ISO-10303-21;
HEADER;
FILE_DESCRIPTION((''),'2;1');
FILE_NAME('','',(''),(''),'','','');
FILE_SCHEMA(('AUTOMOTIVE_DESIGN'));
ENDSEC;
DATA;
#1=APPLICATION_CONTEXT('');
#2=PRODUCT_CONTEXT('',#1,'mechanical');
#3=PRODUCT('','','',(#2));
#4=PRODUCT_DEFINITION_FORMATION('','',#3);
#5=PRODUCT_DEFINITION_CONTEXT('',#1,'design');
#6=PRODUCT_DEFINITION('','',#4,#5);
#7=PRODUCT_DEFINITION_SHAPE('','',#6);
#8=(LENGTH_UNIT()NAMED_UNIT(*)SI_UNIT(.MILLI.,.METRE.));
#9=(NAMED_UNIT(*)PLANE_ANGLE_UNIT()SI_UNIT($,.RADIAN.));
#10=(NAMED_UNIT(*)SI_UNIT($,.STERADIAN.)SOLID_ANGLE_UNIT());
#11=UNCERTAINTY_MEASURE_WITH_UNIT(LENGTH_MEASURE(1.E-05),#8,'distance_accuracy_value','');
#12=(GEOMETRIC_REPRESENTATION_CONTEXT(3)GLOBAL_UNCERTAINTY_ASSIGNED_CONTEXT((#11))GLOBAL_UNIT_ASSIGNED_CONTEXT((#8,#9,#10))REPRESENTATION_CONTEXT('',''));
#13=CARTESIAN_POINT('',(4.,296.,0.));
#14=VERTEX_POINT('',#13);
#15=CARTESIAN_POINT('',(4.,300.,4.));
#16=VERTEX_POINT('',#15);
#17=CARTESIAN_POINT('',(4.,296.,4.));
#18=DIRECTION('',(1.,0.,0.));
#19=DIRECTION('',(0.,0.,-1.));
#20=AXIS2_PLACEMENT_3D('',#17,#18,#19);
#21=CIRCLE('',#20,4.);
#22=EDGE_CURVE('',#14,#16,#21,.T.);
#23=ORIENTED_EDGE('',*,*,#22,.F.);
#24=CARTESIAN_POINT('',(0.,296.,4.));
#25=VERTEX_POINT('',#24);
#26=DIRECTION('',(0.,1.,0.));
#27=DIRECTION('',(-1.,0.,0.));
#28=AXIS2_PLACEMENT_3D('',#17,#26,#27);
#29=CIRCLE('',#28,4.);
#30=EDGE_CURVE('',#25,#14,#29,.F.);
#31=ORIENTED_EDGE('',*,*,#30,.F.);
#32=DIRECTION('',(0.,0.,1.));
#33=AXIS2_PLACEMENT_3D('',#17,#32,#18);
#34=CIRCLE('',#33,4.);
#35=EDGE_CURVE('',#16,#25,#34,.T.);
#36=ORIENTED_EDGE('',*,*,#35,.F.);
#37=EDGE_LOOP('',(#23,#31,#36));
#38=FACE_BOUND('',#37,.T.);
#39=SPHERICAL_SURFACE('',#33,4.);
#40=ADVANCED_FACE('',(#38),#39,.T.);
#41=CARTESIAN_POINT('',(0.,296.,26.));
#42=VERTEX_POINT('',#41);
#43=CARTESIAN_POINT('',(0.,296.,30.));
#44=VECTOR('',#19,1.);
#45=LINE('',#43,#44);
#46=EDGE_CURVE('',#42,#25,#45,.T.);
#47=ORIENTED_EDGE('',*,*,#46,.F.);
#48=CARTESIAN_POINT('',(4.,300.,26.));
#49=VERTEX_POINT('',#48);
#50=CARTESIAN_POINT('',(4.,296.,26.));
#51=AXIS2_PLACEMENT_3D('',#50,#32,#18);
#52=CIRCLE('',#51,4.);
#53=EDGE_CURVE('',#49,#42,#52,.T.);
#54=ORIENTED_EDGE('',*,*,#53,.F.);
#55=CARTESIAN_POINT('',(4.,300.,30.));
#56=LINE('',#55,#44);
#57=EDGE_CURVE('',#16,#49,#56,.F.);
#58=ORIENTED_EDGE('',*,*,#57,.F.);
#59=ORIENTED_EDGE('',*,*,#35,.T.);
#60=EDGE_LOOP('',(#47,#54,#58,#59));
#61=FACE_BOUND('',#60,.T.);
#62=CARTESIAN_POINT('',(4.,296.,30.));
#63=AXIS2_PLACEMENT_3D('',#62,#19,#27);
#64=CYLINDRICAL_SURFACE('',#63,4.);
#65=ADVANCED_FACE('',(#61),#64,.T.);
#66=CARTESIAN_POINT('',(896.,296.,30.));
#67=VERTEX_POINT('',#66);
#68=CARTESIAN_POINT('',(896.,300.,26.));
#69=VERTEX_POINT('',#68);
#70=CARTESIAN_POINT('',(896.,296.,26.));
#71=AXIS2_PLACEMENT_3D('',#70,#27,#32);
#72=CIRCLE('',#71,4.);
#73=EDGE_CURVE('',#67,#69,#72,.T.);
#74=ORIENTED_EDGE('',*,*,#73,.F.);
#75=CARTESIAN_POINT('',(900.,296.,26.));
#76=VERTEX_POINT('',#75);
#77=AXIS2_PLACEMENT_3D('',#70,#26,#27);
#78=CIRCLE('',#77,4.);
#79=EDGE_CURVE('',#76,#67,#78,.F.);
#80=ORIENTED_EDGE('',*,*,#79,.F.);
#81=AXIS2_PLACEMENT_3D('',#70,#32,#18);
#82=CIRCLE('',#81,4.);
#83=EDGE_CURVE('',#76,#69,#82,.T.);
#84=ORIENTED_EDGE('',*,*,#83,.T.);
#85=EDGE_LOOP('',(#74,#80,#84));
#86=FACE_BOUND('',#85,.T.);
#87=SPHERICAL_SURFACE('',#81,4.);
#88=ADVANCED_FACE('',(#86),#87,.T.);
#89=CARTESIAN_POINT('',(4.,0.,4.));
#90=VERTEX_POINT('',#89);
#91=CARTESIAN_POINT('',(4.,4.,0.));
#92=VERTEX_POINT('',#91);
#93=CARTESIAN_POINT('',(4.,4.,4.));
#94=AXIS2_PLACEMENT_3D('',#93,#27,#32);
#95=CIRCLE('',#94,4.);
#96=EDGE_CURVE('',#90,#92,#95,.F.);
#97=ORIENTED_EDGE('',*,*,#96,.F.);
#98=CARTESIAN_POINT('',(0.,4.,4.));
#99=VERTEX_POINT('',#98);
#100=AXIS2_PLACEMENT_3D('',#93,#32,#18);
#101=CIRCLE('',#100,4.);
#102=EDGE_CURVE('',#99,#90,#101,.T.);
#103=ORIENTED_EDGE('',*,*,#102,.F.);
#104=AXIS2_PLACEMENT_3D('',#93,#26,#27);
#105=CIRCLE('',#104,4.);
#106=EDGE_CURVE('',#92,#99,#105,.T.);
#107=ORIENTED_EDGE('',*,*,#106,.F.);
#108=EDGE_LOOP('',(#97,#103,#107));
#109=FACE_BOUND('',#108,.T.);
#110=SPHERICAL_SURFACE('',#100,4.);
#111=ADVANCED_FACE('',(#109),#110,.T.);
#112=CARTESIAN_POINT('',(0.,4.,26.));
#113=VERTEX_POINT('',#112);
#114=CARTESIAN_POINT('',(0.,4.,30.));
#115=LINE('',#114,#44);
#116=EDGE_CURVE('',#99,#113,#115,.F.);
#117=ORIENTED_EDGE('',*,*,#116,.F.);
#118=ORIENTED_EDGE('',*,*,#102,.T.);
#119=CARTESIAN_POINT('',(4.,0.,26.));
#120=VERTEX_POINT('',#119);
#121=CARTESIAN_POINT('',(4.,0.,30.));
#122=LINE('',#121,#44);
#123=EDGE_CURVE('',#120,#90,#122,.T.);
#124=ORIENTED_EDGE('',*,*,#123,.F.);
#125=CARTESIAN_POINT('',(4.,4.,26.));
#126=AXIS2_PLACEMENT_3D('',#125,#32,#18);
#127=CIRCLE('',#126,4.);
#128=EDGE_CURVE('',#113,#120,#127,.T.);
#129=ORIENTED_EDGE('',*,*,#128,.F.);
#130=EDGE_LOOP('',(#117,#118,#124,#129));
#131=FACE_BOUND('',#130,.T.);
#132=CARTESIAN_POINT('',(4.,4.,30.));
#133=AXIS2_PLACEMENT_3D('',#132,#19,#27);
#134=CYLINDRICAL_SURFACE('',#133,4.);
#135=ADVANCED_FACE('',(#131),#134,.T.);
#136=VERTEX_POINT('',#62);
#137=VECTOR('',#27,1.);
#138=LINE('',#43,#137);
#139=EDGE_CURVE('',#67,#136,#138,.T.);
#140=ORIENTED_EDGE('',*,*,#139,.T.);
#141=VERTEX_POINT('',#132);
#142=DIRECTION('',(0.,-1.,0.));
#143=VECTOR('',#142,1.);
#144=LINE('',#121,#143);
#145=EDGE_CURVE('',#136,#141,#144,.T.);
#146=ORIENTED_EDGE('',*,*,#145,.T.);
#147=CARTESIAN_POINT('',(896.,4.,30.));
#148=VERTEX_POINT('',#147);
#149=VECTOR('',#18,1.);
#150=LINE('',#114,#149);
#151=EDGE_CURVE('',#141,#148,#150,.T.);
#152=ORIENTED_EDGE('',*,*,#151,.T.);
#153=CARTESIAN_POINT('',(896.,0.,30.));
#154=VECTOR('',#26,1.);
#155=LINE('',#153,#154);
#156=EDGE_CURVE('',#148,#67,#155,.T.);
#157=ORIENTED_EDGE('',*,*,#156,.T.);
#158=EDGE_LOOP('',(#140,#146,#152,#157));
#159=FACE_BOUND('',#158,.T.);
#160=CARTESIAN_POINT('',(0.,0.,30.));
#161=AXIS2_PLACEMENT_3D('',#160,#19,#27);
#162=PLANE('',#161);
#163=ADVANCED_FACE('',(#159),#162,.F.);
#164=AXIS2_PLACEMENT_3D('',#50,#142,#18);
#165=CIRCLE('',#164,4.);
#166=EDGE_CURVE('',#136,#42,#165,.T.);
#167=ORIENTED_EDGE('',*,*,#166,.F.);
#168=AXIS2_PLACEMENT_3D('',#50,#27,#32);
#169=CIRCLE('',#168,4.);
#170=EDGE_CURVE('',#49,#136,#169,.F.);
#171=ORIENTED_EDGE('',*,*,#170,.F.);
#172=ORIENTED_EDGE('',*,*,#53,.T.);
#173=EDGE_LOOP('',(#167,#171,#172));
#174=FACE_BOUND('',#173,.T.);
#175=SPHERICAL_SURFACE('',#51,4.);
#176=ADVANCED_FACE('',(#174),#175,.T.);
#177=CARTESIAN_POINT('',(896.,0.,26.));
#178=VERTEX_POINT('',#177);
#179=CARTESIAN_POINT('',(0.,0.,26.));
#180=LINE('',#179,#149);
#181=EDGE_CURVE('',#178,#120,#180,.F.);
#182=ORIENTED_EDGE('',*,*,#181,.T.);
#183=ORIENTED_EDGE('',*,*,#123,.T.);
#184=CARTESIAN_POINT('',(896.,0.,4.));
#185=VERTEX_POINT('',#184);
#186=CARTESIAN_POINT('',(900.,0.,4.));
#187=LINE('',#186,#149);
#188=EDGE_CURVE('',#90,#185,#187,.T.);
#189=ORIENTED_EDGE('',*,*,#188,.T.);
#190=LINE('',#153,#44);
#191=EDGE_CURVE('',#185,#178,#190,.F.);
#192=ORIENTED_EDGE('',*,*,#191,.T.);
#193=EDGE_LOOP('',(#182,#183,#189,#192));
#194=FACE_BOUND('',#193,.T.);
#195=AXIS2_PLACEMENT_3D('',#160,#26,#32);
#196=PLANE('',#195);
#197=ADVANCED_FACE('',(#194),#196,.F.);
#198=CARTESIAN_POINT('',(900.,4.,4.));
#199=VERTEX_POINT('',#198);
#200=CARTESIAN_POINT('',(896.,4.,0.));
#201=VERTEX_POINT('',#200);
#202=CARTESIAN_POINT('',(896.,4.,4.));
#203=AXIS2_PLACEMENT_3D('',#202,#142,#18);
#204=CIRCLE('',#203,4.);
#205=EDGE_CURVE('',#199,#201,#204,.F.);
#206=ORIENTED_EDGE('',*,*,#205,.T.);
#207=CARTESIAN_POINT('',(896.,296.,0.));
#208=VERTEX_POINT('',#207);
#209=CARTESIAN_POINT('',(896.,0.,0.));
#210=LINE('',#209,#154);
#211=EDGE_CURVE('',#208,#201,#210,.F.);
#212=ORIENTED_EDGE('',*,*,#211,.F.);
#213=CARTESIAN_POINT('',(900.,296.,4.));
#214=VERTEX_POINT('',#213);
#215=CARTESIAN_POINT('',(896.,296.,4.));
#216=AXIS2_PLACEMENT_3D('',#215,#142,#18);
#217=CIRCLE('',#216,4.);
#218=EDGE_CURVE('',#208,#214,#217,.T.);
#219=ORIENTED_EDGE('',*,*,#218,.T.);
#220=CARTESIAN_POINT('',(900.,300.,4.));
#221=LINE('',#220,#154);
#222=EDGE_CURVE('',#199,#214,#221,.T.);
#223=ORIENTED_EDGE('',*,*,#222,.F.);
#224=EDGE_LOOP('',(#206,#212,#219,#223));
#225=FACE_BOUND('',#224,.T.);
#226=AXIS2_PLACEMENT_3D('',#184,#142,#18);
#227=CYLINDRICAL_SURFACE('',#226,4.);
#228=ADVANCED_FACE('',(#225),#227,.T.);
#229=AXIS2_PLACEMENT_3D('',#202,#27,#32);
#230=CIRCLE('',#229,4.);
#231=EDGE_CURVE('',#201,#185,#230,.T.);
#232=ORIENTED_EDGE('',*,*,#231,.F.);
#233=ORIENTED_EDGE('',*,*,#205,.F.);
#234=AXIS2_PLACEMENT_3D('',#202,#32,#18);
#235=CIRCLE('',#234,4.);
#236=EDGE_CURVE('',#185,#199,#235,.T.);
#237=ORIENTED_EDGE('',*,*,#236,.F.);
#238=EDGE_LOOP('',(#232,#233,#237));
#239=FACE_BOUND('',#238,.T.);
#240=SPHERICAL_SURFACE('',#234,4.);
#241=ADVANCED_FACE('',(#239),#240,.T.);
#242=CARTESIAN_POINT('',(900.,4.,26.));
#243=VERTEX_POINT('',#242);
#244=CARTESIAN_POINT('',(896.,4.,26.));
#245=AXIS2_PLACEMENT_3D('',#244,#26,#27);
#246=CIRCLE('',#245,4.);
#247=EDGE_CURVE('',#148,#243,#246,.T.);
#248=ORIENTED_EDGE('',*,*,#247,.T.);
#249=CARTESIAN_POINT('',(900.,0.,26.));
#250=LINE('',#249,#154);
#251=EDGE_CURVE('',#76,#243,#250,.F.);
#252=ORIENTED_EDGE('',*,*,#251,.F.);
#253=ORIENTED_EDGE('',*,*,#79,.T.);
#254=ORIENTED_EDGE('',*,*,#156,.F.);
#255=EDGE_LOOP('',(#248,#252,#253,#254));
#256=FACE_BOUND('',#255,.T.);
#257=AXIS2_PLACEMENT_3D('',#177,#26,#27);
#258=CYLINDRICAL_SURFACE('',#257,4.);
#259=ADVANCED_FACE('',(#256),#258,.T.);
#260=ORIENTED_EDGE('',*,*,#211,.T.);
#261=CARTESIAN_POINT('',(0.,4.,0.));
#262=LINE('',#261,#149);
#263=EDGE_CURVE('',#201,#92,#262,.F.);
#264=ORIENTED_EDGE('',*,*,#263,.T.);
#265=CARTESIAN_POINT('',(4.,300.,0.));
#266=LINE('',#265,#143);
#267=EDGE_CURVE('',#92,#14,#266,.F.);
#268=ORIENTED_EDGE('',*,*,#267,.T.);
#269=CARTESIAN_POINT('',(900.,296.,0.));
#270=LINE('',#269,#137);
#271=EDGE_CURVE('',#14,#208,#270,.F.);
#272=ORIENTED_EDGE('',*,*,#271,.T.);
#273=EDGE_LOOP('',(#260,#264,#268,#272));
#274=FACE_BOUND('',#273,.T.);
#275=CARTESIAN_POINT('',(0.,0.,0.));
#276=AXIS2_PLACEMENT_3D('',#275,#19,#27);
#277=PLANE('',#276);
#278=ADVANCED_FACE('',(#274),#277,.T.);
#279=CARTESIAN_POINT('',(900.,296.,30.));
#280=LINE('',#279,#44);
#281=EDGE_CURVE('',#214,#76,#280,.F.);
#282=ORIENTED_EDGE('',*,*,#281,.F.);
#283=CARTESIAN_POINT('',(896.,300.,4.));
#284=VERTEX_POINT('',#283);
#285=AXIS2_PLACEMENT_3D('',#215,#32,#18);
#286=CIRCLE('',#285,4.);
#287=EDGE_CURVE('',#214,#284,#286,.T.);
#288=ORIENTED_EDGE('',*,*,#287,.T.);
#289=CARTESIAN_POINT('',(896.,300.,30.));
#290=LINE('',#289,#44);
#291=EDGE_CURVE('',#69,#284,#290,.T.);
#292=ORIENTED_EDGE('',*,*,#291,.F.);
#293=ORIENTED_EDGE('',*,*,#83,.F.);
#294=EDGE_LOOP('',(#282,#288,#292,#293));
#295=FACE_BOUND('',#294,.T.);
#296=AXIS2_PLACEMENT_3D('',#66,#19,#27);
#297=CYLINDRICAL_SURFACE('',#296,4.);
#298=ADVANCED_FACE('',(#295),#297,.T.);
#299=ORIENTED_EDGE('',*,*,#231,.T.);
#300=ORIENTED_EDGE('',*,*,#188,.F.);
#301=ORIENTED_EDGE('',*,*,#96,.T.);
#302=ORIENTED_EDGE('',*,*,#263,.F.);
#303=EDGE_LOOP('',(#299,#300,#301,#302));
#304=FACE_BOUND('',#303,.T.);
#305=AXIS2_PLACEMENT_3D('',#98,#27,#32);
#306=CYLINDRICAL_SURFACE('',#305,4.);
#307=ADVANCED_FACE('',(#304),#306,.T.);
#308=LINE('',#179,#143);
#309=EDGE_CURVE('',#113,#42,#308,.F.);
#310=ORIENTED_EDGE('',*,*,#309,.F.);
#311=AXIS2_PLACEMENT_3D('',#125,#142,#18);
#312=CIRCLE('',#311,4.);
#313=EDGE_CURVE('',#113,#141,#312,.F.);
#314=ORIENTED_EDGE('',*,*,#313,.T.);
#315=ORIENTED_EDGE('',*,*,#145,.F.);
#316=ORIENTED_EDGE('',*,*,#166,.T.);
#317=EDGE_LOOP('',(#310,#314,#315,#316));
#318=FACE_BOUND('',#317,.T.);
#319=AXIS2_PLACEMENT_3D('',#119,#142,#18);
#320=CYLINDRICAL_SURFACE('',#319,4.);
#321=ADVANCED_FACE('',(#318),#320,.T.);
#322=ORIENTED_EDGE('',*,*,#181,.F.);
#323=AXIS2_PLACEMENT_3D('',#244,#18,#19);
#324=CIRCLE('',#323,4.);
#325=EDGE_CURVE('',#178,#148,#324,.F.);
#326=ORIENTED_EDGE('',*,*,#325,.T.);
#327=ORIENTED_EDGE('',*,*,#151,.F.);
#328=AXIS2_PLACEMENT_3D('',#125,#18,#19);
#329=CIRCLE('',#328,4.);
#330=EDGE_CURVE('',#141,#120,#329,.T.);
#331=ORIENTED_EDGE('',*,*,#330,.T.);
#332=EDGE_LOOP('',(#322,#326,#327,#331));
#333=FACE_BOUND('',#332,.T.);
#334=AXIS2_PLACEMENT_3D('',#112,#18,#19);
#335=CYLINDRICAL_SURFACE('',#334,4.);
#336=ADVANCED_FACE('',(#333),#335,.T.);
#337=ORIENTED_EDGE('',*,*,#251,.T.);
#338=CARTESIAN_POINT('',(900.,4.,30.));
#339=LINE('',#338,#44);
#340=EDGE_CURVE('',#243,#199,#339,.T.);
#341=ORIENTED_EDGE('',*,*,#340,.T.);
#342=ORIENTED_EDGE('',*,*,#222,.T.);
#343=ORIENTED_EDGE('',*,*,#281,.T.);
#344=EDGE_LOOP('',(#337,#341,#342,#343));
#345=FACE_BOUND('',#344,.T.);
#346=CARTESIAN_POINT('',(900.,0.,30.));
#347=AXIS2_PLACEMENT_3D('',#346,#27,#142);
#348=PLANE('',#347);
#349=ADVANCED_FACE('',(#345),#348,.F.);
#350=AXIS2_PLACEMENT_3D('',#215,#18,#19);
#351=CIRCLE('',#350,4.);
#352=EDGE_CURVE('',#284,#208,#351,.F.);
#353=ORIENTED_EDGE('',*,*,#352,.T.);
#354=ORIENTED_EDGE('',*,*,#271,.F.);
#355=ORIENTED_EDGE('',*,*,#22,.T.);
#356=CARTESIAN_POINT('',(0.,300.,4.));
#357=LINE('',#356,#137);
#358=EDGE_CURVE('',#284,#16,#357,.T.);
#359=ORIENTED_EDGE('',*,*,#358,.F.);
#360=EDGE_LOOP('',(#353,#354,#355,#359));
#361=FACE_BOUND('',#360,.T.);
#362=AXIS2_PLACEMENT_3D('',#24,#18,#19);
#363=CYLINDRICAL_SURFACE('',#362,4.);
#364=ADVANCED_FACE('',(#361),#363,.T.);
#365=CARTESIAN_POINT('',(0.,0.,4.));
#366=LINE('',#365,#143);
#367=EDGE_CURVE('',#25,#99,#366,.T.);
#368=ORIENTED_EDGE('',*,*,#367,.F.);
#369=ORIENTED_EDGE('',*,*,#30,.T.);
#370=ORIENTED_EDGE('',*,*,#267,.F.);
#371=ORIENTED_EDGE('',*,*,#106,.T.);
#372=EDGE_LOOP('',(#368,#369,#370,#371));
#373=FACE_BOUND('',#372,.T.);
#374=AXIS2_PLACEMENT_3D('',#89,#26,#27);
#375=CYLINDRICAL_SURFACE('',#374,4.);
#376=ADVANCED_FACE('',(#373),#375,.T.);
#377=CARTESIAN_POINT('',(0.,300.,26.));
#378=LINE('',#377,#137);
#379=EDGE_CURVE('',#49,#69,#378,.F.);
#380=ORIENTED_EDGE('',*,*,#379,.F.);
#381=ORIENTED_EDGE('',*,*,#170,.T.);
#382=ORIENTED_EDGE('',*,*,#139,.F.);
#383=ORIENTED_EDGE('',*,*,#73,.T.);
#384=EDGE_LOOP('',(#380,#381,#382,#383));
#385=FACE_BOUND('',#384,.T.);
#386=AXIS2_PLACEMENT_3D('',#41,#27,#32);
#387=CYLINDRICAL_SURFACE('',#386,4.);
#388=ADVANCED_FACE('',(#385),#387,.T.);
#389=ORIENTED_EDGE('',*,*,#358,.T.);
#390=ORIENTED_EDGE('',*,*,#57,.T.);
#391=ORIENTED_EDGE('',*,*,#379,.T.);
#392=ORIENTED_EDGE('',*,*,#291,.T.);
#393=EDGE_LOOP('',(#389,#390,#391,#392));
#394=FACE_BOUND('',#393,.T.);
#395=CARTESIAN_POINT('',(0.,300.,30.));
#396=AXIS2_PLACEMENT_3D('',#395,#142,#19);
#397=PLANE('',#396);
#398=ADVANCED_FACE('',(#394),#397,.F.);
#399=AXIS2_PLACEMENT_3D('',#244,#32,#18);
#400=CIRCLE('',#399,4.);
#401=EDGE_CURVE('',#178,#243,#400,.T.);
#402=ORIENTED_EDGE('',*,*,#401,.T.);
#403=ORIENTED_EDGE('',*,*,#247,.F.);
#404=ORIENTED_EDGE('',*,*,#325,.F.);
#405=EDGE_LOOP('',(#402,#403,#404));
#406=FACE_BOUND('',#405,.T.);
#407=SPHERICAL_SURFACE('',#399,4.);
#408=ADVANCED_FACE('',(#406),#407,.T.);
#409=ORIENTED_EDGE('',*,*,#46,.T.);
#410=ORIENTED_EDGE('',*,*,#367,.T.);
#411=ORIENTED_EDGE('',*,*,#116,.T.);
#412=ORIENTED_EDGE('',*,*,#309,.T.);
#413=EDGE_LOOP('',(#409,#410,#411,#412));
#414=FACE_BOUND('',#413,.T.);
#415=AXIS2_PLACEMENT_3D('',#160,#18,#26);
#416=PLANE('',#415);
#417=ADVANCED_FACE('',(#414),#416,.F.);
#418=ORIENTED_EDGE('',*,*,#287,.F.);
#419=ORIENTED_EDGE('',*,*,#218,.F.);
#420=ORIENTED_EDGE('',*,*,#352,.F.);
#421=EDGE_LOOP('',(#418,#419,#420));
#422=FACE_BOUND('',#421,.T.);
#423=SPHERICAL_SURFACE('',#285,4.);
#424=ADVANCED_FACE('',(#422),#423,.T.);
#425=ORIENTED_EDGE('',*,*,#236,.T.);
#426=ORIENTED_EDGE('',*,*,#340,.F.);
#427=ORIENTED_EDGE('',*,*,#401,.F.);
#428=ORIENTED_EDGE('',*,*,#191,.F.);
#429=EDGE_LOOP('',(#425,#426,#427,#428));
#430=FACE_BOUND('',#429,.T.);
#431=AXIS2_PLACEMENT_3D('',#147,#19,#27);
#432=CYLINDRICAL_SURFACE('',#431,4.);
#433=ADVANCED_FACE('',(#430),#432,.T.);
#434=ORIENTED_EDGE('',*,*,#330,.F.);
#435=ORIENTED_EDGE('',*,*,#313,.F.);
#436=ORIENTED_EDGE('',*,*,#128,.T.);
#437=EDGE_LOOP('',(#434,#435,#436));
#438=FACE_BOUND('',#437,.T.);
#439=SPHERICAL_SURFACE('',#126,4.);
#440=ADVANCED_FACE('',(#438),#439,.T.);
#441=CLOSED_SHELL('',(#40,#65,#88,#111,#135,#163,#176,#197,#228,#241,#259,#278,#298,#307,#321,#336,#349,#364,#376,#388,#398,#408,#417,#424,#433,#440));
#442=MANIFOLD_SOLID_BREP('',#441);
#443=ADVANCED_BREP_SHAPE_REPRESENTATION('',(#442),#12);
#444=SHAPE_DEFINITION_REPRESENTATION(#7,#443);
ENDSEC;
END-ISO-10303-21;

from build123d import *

# Parameters (mm, degrees)
SKETCH1_W           = 900
SKETCH1_H           = 300
BOSS_EXTRUDE1_DEPTH = 30
FILLET1_R           = 4
FILLET2_R           = 4
FILLET3_R           = 4


with BuildPart() as part:
    # Sketch1 → Boss-Extrude1 (new body)
    with BuildSketch(Plane.XY):
        with Locations((450, 150)):
            Rectangle(SKETCH1_W, SKETCH1_H)
    extrude(amount=BOSS_EXTRUDE1_DEPTH)

    # Fillet1
    fillet1_edges = [part.edges().sort_by_distance(p)[0] for p in [
        (900, 150, 30),
        (450, 300, 30),
        (0, 150, 30),
        (450, 0, 30),
    ]]
    fillet(fillet1_edges, radius=FILLET1_R)

    # Fillet2
    fillet2_edges = [part.edges().sort_by_distance(p)[0] for p in [
        (450, 300, 0),
        (900, 150, 0),
        (450, 0, 0),
        (0, 150, 0),
    ]]
    fillet(fillet2_edges, radius=FILLET2_R)

    # Fillet3
    # the kernel refuses this fillet: 4 mm, written as the material it takes off along each edge
    with BuildSketch(Plane(origin=(896, 4, 26), x_dir=(1, 0, 0), z_dir=(0, -1, 0))) as fillet3_piece_1_section:
        Polygon((0, 0), (FILLET3_R, 0), (FILLET3_R, FILLET3_R), (0, FILLET3_R), align=None)
    fillet3_piece_1 = extrude(amount=FILLET3_R, mode=Mode.PRIVATE)
    fillet3_piece_1 = fillet3_piece_1 - Plane(origin=(896, 4, 26), x_dir=(-0.7071067811865475, 0, -0.7071067811865475), z_dir=(0, -1, 0)) * Sphere(FILLET3_R, mode=Mode.PRIVATE)
    add(fillet3_piece_1, mode=Mode.SUBTRACT)
    with BuildSketch(Plane(origin=(4, 4, 26), x_dir=(-1, 0, 0), z_dir=(0, -1, 0))) as fillet3_piece_2_section:
        Polygon((0, 0), (FILLET3_R, 0), (FILLET3_R, -FILLET3_R), (0, -FILLET3_R), align=None)
    fillet3_piece_2 = extrude(amount=FILLET3_R, mode=Mode.PRIVATE)
    fillet3_piece_2 = fillet3_piece_2 - Plane(origin=(4, 4, 26), x_dir=(0.7071067811865475, 0, -0.7071067811865475), z_dir=(0, -1, 0)) * Sphere(FILLET3_R, mode=Mode.PRIVATE)
    add(fillet3_piece_2, mode=Mode.SUBTRACT)
    with BuildSketch(Plane(origin=(896, 296, 26), x_dir=(0, 1, 0), z_dir=(1, 0, 0))) as fillet3_piece_3_section:
        Polygon((0, 0), (FILLET3_R, 0), (FILLET3_R, FILLET3_R), (0, FILLET3_R), align=None)
    fillet3_piece_3 = extrude(amount=FILLET3_R, mode=Mode.PRIVATE)
    fillet3_piece_3 = fillet3_piece_3 - Plane(origin=(896, 296, 26), x_dir=(0, -0.7071067811865475, -0.7071067811865475), z_dir=(1, 0, 0)) * Sphere(FILLET3_R, mode=Mode.PRIVATE)
    add(fillet3_piece_3, mode=Mode.SUBTRACT)
    with BuildSketch(Plane(origin=(4, 296, 26), x_dir=(0, 1, 0), z_dir=(-1, 0, 0))) as fillet3_piece_4_section:
        Polygon((0, 0), (FILLET3_R, 0), (FILLET3_R, -FILLET3_R), (0, -FILLET3_R), align=None)
    fillet3_piece_4 = extrude(amount=FILLET3_R, mode=Mode.PRIVATE)
    fillet3_piece_4 = fillet3_piece_4 - Plane(origin=(4, 296, 26), x_dir=(0, -0.7071067811865475, -0.7071067811865475), z_dir=(-1, 0, 0)) * Sphere(FILLET3_R, mode=Mode.PRIVATE)
    add(fillet3_piece_4, mode=Mode.SUBTRACT)
    with BuildSketch(Plane(origin=(4, 296, 4), x_dir=(0, 1, 0), z_dir=(-1, 0, 0))) as fillet3_piece_5_section:
        Polygon((0, 0), (FILLET3_R, 0), (FILLET3_R, FILLET3_R), (0, FILLET3_R), align=None)
    fillet3_piece_5 = extrude(amount=FILLET3_R, mode=Mode.PRIVATE)
    fillet3_piece_5 = fillet3_piece_5 - Plane(origin=(4, 296, 4), x_dir=(0, -0.7071067811865475, 0.7071067811865475), z_dir=(-1, 0, 0)) * Sphere(FILLET3_R, mode=Mode.PRIVATE)
    add(fillet3_piece_5, mode=Mode.SUBTRACT)
    with BuildSketch(Plane(origin=(896, 296, 4), x_dir=(0, 1, 0), z_dir=(1, 0, 0))) as fillet3_piece_6_section:
        Polygon((0, 0), (FILLET3_R, 0), (FILLET3_R, -FILLET3_R), (0, -FILLET3_R), align=None)
    fillet3_piece_6 = extrude(amount=FILLET3_R, mode=Mode.PRIVATE)
    fillet3_piece_6 = fillet3_piece_6 - Plane(origin=(896, 296, 4), x_dir=(0, -0.7071067811865475, 0.7071067811865475), z_dir=(1, 0, 0)) * Sphere(FILLET3_R, mode=Mode.PRIVATE)
    add(fillet3_piece_6, mode=Mode.SUBTRACT)
    with BuildSketch(Plane(origin=(4, 4, 4), x_dir=(-1, 0, 0), z_dir=(0, -1, 0))) as fillet3_piece_7_section:
        Polygon((0, 0), (FILLET3_R, 0), (FILLET3_R, FILLET3_R), (0, FILLET3_R), align=None)
    fillet3_piece_7 = extrude(amount=FILLET3_R, mode=Mode.PRIVATE)
    fillet3_piece_7 = fillet3_piece_7 - Plane(origin=(4, 4, 4), x_dir=(0.7071067811865475, 0, 0.7071067811865475), z_dir=(0, -1, 0)) * Sphere(FILLET3_R, mode=Mode.PRIVATE)
    add(fillet3_piece_7, mode=Mode.SUBTRACT)
    with BuildSketch(Plane(origin=(896, 4, 4), x_dir=(1, 0, 0), z_dir=(0, -1, 0))) as fillet3_piece_8_section:
        Polygon((0, 0), (FILLET3_R, 0), (FILLET3_R, -FILLET3_R), (0, -FILLET3_R), align=None)
    fillet3_piece_8 = extrude(amount=FILLET3_R, mode=Mode.PRIVATE)
    fillet3_piece_8 = fillet3_piece_8 - Plane(origin=(896, 4, 4), x_dir=(-0.7071067811865475, 0, 0.7071067811865475), z_dir=(0, -1, 0)) * Sphere(FILLET3_R, mode=Mode.PRIVATE)
    add(fillet3_piece_8, mode=Mode.SUBTRACT)
    with BuildSketch(Plane(origin=(0, 300, 4), x_dir=(0, -1, 0), z_dir=(0, 0, 1)), Plane(origin=(0, 0, 4), x_dir=(1, 0, 0), z_dir=(0, 0, 1))) as fillet3_piece_9:
        with BuildLine():
            CenterArc((FILLET3_R, FILLET3_R), FILLET3_R, 180, 90)
            Line((0, FILLET3_R), (0, 0))
            Line((0, 0), (FILLET3_R, 0))
        make_face()
    extrude(amount=22, mode=Mode.SUBTRACT)
    with BuildSketch(Plane(origin=(900, 300, 4), x_dir=(0, -1, 0), z_dir=(0, 0, 1)), Plane(origin=(900, 0, 4), x_dir=(-1, 0, 0), z_dir=(0, 0, 1))) as fillet3_piece_10:
        with BuildLine():
            CenterArc((FILLET3_R, -FILLET3_R), FILLET3_R, 90, 90)
            Line((0, -FILLET3_R), (0, 0))
            Line((0, 0), (FILLET3_R, 0))
        make_face()
    extrude(amount=22, mode=Mode.SUBTRACT)


solid = part.part
